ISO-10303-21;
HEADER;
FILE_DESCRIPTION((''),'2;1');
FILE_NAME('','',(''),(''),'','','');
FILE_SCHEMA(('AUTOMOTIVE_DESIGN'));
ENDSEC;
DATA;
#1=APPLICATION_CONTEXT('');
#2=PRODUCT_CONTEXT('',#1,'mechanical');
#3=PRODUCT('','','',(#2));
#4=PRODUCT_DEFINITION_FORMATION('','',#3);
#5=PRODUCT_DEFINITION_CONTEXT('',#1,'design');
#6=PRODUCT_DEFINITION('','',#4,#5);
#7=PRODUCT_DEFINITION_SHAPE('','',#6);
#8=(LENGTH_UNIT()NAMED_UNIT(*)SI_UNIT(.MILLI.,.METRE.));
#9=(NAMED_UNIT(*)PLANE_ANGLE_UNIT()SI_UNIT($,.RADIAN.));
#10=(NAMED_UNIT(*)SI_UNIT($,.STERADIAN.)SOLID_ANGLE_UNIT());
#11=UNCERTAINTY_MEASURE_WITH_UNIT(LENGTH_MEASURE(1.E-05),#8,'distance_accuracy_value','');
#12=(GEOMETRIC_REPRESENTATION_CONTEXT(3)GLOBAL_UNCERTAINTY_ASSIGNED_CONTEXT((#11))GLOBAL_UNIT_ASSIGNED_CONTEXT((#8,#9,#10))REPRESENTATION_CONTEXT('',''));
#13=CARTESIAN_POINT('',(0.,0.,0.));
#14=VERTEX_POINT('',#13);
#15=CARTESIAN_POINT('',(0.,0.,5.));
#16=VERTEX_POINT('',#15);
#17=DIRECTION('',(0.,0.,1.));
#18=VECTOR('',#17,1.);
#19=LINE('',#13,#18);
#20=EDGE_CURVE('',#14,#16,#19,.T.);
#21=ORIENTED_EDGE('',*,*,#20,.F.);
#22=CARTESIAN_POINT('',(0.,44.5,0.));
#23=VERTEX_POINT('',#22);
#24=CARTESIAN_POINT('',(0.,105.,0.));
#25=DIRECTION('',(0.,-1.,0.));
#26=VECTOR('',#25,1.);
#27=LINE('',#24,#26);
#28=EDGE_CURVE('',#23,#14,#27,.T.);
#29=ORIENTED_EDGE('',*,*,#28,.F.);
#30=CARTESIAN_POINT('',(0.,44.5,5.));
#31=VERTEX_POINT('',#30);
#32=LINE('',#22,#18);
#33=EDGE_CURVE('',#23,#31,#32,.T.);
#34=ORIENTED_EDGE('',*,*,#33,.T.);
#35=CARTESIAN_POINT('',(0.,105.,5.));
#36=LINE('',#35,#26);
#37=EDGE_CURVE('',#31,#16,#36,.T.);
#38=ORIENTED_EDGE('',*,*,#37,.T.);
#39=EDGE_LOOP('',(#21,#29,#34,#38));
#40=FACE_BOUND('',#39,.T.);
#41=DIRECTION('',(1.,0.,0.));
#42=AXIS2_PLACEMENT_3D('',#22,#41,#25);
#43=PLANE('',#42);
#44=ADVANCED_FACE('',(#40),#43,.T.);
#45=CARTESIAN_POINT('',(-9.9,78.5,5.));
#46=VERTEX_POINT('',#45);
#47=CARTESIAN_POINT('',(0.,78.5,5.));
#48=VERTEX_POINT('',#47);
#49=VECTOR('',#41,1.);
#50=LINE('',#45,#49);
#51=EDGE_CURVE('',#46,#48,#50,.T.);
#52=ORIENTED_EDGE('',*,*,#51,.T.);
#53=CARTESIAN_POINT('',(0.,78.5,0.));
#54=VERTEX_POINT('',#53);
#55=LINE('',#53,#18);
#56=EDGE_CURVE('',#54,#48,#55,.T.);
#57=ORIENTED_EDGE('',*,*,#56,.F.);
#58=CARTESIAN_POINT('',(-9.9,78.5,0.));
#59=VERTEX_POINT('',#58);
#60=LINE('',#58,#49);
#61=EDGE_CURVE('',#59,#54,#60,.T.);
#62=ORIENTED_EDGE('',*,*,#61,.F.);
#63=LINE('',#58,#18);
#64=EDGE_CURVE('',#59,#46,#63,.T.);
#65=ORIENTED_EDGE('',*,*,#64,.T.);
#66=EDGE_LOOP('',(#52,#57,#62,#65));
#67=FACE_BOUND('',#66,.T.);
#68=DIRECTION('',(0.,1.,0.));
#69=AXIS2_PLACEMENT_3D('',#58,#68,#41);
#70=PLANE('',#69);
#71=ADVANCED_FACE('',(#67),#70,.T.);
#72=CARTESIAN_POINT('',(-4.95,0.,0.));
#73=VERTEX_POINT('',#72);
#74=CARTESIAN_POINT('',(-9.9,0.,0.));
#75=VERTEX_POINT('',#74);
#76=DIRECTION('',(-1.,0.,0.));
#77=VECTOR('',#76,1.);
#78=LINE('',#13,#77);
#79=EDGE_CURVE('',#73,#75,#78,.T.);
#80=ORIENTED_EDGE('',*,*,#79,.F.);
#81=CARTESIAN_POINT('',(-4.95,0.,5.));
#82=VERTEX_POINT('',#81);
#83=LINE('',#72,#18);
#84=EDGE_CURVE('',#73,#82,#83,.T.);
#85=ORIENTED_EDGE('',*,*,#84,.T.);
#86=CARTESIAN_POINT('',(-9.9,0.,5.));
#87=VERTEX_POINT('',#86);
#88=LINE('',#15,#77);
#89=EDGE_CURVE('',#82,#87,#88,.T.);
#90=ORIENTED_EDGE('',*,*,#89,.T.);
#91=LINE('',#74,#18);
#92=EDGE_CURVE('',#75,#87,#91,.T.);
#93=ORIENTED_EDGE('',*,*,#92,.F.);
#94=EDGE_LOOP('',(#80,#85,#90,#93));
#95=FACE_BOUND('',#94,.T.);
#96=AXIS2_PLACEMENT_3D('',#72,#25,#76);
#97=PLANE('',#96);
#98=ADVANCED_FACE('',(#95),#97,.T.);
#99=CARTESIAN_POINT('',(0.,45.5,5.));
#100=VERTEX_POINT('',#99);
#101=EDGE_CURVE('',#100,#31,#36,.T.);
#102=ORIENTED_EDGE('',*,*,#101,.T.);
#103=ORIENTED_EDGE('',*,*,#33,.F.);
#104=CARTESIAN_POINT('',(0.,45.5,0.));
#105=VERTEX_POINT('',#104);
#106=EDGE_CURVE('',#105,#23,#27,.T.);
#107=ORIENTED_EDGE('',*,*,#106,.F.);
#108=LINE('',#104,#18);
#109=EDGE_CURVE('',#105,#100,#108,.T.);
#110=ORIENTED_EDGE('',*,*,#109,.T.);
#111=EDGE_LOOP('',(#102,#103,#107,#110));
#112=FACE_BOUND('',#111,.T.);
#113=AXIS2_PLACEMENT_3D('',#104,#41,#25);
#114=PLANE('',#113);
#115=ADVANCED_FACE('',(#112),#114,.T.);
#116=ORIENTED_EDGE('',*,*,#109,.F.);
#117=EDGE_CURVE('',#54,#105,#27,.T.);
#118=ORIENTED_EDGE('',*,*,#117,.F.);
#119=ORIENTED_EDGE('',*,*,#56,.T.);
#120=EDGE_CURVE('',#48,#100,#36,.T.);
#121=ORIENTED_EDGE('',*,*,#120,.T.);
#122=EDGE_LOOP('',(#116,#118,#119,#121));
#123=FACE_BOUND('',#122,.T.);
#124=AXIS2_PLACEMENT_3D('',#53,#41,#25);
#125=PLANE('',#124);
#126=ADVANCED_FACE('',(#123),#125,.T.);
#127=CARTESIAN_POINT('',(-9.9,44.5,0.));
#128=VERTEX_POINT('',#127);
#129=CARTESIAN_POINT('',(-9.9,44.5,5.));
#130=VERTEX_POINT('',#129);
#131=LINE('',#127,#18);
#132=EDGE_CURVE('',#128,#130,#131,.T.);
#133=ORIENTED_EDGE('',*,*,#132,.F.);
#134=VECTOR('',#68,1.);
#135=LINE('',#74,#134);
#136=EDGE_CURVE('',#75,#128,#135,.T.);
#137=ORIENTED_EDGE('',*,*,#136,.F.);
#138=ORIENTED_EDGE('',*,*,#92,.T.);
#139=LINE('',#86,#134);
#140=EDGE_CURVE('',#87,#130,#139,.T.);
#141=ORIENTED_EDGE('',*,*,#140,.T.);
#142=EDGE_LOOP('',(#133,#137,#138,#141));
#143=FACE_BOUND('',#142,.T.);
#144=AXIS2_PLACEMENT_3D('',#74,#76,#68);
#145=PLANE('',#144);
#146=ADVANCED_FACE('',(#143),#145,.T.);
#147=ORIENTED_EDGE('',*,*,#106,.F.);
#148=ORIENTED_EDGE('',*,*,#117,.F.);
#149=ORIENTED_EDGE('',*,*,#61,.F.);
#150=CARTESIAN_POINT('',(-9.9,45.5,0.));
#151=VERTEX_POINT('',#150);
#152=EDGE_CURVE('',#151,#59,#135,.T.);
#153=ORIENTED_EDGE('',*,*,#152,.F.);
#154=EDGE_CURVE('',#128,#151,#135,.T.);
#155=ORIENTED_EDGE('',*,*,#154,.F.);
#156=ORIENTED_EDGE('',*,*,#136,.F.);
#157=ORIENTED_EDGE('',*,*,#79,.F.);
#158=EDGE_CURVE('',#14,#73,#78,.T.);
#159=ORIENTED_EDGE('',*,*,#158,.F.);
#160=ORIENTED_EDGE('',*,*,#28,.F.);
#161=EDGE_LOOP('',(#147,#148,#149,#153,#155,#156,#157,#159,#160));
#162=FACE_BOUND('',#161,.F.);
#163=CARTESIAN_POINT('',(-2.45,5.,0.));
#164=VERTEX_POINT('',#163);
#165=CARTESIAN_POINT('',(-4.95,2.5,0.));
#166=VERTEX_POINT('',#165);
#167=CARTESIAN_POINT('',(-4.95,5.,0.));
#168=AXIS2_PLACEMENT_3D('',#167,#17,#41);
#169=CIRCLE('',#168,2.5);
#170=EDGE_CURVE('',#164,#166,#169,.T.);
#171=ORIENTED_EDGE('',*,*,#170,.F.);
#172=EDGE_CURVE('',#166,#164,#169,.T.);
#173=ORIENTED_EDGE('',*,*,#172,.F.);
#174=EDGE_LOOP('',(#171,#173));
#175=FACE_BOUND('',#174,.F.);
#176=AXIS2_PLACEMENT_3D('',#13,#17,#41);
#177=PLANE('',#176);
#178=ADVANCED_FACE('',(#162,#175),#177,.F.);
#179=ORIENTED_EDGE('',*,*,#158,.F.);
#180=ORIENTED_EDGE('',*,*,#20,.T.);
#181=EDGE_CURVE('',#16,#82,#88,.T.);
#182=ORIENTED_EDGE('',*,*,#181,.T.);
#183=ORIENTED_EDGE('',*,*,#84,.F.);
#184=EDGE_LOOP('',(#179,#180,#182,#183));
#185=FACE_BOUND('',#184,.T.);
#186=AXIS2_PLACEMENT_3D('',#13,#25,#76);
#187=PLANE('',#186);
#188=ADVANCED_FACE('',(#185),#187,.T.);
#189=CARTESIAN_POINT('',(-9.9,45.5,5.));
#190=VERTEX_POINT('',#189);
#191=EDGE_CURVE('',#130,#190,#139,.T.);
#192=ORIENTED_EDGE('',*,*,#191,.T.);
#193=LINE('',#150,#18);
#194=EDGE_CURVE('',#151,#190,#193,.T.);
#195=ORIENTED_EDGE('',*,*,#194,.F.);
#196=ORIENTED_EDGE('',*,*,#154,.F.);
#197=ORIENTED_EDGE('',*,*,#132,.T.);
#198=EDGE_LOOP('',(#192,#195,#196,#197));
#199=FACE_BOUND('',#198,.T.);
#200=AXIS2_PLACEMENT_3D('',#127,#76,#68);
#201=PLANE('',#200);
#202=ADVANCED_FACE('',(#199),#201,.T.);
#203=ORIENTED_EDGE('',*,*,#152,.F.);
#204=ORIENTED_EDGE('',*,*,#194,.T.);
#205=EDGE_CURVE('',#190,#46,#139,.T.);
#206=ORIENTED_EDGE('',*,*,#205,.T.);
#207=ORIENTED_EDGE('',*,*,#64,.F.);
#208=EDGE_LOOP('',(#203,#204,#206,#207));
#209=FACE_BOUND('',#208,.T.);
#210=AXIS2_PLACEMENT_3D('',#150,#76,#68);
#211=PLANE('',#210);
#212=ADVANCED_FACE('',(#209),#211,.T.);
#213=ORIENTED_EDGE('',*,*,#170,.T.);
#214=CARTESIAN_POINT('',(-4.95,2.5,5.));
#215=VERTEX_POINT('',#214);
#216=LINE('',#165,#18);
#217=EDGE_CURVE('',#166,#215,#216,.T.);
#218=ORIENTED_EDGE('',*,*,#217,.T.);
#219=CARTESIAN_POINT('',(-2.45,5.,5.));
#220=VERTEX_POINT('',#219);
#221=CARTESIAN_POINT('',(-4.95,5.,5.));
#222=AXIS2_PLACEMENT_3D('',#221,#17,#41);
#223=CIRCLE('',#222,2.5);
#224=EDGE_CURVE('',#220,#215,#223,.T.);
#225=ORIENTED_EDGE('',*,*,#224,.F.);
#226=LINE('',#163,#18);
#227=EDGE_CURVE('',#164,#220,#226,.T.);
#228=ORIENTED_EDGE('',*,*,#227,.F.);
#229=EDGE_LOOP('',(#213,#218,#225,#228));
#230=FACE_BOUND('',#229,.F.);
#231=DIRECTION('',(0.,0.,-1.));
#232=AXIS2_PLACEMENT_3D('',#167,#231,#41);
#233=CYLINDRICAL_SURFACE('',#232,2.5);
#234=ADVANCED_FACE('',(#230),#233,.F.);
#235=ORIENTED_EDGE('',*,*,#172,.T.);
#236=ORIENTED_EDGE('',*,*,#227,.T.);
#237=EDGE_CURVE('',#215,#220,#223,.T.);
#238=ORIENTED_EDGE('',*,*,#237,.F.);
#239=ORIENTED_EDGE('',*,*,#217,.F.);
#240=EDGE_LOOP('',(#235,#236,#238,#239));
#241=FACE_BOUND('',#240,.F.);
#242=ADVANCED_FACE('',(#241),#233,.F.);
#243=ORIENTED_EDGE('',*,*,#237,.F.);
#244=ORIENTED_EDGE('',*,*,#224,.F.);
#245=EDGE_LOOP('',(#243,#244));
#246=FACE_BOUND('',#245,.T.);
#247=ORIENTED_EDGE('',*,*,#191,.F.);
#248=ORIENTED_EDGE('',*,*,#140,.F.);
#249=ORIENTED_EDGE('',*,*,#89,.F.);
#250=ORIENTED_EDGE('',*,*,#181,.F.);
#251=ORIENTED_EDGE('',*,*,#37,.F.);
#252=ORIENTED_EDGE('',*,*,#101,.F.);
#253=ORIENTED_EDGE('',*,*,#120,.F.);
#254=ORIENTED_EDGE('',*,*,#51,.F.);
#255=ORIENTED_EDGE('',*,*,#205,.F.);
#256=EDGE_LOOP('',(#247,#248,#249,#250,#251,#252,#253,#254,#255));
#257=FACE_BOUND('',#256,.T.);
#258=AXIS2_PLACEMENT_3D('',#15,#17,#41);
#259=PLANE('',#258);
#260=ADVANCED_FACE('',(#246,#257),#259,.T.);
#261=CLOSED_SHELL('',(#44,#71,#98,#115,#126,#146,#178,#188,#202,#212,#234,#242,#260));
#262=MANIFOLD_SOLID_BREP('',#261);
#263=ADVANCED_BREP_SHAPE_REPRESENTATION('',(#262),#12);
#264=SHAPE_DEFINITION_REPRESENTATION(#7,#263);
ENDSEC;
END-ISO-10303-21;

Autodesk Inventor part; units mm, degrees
ref_plane "YZ Plane" through (0, 0, 0) normal (1, 0, 0) x (0, 1, 0)
ref_plane "XZ Plane" through (0, 0, 0) normal (0, 1, 0) x (-1, 0, 0)
ref_plane "XY Plane" through (0, 0, 0) normal (0, 0, 1) x (1, 0, 0)
sketch "Sketch2" plane through (0, 0, 0) normal (0, 0, 1) x (1, 0, 0)
  line L0 (0, 0) -> (-9.9, 0)
  line L1 (-9.9, 0) -> (-9.9, 105)
  line L2 (-9.9, 105) -> (0, 105)
  line L3 (0, 105) -> (0, 0)
  line L4 (-4.95, 0) -> (-4.95, 2.5)
  line L5 (-4.95, 0) -> (-2.45, 0) construction
  circle A0 centre (-4.95, 5) radius 2.5
  line L6 (-4.95, 7.5) -> (32.05, 7.5) construction
  line L7 (0, 44.5) -> (0, 0)
  line L8 (0, 0) -> (-9.9, 0)
  line L9 (-9.9, 0) -> (-9.9, 44.5)
  line L10 (0, 45.5) -> (0, 0)
  line L11 (0, 0) -> (-9.9, 0)
  line L12 (-9.9, 0) -> (-9.9, 45.5)
  line L13 (-4.95, 7.5) -> (66.05, 7.5) construction
  line L14 (-9.9, 78.5) -> (0, 78.5)
  dimension "d35" = 5
  dimension "d4" = 9.9
  dimension "d5" = 105
  dimension "d33" = 2.5
  dimension "d34" = 90
extrude "Extrusion5" add sketch "Sketch2" along normal blind 5 contours L0 L1 L14 L3
properties part number "Elbow_Cube_Holder_TestFit_V2"
